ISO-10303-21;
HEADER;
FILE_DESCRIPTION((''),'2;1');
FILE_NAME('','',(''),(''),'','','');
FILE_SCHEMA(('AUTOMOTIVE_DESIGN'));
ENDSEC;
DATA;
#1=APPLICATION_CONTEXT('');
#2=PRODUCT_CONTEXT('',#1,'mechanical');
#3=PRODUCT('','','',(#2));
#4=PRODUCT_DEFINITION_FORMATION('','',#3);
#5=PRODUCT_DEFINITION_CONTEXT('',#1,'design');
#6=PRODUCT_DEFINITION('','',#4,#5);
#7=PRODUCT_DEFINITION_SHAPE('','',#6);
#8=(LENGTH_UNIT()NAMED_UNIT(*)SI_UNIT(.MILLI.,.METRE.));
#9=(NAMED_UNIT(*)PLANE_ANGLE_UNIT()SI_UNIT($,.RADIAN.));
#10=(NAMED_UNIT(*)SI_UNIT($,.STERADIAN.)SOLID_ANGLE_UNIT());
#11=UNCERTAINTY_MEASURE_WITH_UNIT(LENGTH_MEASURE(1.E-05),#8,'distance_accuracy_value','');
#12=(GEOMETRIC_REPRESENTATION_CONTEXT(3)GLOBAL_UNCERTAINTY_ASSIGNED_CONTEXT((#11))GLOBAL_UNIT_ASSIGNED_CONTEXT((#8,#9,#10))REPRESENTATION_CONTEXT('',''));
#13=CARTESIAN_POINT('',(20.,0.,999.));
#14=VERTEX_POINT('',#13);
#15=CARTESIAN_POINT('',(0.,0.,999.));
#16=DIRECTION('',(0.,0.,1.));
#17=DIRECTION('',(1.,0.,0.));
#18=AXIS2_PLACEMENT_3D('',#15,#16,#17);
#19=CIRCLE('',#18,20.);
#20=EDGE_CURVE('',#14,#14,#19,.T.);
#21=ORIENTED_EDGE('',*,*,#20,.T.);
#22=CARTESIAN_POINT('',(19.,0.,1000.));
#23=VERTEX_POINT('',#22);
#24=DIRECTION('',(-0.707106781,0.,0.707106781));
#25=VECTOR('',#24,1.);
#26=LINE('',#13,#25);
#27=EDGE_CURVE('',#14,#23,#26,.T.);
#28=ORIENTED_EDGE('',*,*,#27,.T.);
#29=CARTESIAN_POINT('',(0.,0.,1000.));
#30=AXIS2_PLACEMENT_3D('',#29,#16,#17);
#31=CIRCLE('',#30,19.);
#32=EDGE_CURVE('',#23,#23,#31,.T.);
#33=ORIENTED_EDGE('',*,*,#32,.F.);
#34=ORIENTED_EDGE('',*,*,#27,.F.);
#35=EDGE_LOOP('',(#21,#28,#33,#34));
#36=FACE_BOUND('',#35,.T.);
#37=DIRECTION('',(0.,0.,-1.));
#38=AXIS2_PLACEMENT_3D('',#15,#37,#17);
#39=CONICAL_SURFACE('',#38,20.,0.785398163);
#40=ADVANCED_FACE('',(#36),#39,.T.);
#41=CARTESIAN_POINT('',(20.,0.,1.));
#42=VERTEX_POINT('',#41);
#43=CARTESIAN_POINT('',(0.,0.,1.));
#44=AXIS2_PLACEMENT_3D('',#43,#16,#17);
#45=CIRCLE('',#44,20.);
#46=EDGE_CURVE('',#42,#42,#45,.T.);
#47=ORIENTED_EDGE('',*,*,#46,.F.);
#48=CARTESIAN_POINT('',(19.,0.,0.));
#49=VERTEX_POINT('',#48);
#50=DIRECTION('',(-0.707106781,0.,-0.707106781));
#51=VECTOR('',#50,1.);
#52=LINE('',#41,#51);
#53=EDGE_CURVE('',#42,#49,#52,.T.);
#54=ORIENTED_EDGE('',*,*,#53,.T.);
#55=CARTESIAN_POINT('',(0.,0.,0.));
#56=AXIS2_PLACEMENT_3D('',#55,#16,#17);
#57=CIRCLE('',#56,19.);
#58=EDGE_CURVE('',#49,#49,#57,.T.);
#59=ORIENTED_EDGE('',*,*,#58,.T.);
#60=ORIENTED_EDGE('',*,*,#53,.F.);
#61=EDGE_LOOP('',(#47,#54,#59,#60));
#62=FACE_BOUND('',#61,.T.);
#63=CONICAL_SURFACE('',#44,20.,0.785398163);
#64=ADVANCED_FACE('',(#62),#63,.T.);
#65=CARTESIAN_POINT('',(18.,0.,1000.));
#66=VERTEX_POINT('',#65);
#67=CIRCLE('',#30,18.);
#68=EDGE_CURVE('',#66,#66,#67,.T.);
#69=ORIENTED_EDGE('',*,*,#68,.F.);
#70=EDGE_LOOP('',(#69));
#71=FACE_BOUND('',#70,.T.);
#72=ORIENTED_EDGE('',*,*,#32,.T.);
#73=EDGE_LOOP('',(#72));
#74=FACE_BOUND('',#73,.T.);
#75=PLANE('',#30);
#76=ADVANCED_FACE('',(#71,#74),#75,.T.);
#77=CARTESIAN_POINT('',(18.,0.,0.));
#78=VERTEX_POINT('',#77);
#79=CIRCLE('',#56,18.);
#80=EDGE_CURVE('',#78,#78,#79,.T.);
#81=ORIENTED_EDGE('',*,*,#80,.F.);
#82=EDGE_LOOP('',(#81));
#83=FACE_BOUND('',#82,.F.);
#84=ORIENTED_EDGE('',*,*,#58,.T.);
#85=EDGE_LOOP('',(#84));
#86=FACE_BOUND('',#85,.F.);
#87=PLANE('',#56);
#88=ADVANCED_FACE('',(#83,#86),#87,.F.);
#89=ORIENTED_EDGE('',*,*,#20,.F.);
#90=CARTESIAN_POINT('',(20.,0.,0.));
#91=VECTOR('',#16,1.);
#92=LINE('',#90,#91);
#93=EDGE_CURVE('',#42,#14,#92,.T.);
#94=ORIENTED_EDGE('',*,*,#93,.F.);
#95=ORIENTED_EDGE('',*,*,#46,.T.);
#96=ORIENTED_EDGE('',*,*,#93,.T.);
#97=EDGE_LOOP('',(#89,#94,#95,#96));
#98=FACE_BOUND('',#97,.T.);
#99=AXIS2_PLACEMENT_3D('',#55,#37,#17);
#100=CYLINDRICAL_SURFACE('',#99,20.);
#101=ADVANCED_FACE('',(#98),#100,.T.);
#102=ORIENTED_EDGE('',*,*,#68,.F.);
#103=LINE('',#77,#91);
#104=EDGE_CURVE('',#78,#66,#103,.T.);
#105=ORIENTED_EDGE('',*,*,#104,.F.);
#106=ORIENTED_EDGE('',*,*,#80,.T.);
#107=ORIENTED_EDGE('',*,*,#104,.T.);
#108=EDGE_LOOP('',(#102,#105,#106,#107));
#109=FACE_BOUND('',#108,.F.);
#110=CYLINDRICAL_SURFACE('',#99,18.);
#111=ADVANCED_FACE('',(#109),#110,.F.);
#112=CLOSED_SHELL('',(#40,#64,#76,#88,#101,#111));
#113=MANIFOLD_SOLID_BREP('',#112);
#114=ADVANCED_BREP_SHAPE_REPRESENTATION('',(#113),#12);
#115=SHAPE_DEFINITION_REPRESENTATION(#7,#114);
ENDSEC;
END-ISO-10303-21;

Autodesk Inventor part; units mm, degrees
ref_plane "YZ Plane" through (0, 0, 0) normal (1, 0, 0) x (0, 1, 0)
ref_plane "XZ Plane" through (0, 0, 0) normal (0, 1, 0) x (-1, 0, 0)
ref_plane "XY Plane" through (0, 0, 0) normal (0, 0, 1) x (1, 0, 0)
sketch "Sketch1" plane through (0, 0, 0) normal (0, 0, 1) x (1, 0, 0)
  circle A0 centre (0, 0) radius 20
  circle A1 centre (0, 0) radius 18
  dimension "d0" = 40
  dimension "d1" = 2
extrude "Extrusion1" add sketch "Sketch1" along normal blind 1000
chamfer "Chamfer1" distance 1 angle 45 1 edges at (-20, 0, 1000)
chamfer "Chamfer2" distance 1 angle 45 1 edges at (-20, 0, 0)
properties part number "STK00-001" material "Polypropylene"
